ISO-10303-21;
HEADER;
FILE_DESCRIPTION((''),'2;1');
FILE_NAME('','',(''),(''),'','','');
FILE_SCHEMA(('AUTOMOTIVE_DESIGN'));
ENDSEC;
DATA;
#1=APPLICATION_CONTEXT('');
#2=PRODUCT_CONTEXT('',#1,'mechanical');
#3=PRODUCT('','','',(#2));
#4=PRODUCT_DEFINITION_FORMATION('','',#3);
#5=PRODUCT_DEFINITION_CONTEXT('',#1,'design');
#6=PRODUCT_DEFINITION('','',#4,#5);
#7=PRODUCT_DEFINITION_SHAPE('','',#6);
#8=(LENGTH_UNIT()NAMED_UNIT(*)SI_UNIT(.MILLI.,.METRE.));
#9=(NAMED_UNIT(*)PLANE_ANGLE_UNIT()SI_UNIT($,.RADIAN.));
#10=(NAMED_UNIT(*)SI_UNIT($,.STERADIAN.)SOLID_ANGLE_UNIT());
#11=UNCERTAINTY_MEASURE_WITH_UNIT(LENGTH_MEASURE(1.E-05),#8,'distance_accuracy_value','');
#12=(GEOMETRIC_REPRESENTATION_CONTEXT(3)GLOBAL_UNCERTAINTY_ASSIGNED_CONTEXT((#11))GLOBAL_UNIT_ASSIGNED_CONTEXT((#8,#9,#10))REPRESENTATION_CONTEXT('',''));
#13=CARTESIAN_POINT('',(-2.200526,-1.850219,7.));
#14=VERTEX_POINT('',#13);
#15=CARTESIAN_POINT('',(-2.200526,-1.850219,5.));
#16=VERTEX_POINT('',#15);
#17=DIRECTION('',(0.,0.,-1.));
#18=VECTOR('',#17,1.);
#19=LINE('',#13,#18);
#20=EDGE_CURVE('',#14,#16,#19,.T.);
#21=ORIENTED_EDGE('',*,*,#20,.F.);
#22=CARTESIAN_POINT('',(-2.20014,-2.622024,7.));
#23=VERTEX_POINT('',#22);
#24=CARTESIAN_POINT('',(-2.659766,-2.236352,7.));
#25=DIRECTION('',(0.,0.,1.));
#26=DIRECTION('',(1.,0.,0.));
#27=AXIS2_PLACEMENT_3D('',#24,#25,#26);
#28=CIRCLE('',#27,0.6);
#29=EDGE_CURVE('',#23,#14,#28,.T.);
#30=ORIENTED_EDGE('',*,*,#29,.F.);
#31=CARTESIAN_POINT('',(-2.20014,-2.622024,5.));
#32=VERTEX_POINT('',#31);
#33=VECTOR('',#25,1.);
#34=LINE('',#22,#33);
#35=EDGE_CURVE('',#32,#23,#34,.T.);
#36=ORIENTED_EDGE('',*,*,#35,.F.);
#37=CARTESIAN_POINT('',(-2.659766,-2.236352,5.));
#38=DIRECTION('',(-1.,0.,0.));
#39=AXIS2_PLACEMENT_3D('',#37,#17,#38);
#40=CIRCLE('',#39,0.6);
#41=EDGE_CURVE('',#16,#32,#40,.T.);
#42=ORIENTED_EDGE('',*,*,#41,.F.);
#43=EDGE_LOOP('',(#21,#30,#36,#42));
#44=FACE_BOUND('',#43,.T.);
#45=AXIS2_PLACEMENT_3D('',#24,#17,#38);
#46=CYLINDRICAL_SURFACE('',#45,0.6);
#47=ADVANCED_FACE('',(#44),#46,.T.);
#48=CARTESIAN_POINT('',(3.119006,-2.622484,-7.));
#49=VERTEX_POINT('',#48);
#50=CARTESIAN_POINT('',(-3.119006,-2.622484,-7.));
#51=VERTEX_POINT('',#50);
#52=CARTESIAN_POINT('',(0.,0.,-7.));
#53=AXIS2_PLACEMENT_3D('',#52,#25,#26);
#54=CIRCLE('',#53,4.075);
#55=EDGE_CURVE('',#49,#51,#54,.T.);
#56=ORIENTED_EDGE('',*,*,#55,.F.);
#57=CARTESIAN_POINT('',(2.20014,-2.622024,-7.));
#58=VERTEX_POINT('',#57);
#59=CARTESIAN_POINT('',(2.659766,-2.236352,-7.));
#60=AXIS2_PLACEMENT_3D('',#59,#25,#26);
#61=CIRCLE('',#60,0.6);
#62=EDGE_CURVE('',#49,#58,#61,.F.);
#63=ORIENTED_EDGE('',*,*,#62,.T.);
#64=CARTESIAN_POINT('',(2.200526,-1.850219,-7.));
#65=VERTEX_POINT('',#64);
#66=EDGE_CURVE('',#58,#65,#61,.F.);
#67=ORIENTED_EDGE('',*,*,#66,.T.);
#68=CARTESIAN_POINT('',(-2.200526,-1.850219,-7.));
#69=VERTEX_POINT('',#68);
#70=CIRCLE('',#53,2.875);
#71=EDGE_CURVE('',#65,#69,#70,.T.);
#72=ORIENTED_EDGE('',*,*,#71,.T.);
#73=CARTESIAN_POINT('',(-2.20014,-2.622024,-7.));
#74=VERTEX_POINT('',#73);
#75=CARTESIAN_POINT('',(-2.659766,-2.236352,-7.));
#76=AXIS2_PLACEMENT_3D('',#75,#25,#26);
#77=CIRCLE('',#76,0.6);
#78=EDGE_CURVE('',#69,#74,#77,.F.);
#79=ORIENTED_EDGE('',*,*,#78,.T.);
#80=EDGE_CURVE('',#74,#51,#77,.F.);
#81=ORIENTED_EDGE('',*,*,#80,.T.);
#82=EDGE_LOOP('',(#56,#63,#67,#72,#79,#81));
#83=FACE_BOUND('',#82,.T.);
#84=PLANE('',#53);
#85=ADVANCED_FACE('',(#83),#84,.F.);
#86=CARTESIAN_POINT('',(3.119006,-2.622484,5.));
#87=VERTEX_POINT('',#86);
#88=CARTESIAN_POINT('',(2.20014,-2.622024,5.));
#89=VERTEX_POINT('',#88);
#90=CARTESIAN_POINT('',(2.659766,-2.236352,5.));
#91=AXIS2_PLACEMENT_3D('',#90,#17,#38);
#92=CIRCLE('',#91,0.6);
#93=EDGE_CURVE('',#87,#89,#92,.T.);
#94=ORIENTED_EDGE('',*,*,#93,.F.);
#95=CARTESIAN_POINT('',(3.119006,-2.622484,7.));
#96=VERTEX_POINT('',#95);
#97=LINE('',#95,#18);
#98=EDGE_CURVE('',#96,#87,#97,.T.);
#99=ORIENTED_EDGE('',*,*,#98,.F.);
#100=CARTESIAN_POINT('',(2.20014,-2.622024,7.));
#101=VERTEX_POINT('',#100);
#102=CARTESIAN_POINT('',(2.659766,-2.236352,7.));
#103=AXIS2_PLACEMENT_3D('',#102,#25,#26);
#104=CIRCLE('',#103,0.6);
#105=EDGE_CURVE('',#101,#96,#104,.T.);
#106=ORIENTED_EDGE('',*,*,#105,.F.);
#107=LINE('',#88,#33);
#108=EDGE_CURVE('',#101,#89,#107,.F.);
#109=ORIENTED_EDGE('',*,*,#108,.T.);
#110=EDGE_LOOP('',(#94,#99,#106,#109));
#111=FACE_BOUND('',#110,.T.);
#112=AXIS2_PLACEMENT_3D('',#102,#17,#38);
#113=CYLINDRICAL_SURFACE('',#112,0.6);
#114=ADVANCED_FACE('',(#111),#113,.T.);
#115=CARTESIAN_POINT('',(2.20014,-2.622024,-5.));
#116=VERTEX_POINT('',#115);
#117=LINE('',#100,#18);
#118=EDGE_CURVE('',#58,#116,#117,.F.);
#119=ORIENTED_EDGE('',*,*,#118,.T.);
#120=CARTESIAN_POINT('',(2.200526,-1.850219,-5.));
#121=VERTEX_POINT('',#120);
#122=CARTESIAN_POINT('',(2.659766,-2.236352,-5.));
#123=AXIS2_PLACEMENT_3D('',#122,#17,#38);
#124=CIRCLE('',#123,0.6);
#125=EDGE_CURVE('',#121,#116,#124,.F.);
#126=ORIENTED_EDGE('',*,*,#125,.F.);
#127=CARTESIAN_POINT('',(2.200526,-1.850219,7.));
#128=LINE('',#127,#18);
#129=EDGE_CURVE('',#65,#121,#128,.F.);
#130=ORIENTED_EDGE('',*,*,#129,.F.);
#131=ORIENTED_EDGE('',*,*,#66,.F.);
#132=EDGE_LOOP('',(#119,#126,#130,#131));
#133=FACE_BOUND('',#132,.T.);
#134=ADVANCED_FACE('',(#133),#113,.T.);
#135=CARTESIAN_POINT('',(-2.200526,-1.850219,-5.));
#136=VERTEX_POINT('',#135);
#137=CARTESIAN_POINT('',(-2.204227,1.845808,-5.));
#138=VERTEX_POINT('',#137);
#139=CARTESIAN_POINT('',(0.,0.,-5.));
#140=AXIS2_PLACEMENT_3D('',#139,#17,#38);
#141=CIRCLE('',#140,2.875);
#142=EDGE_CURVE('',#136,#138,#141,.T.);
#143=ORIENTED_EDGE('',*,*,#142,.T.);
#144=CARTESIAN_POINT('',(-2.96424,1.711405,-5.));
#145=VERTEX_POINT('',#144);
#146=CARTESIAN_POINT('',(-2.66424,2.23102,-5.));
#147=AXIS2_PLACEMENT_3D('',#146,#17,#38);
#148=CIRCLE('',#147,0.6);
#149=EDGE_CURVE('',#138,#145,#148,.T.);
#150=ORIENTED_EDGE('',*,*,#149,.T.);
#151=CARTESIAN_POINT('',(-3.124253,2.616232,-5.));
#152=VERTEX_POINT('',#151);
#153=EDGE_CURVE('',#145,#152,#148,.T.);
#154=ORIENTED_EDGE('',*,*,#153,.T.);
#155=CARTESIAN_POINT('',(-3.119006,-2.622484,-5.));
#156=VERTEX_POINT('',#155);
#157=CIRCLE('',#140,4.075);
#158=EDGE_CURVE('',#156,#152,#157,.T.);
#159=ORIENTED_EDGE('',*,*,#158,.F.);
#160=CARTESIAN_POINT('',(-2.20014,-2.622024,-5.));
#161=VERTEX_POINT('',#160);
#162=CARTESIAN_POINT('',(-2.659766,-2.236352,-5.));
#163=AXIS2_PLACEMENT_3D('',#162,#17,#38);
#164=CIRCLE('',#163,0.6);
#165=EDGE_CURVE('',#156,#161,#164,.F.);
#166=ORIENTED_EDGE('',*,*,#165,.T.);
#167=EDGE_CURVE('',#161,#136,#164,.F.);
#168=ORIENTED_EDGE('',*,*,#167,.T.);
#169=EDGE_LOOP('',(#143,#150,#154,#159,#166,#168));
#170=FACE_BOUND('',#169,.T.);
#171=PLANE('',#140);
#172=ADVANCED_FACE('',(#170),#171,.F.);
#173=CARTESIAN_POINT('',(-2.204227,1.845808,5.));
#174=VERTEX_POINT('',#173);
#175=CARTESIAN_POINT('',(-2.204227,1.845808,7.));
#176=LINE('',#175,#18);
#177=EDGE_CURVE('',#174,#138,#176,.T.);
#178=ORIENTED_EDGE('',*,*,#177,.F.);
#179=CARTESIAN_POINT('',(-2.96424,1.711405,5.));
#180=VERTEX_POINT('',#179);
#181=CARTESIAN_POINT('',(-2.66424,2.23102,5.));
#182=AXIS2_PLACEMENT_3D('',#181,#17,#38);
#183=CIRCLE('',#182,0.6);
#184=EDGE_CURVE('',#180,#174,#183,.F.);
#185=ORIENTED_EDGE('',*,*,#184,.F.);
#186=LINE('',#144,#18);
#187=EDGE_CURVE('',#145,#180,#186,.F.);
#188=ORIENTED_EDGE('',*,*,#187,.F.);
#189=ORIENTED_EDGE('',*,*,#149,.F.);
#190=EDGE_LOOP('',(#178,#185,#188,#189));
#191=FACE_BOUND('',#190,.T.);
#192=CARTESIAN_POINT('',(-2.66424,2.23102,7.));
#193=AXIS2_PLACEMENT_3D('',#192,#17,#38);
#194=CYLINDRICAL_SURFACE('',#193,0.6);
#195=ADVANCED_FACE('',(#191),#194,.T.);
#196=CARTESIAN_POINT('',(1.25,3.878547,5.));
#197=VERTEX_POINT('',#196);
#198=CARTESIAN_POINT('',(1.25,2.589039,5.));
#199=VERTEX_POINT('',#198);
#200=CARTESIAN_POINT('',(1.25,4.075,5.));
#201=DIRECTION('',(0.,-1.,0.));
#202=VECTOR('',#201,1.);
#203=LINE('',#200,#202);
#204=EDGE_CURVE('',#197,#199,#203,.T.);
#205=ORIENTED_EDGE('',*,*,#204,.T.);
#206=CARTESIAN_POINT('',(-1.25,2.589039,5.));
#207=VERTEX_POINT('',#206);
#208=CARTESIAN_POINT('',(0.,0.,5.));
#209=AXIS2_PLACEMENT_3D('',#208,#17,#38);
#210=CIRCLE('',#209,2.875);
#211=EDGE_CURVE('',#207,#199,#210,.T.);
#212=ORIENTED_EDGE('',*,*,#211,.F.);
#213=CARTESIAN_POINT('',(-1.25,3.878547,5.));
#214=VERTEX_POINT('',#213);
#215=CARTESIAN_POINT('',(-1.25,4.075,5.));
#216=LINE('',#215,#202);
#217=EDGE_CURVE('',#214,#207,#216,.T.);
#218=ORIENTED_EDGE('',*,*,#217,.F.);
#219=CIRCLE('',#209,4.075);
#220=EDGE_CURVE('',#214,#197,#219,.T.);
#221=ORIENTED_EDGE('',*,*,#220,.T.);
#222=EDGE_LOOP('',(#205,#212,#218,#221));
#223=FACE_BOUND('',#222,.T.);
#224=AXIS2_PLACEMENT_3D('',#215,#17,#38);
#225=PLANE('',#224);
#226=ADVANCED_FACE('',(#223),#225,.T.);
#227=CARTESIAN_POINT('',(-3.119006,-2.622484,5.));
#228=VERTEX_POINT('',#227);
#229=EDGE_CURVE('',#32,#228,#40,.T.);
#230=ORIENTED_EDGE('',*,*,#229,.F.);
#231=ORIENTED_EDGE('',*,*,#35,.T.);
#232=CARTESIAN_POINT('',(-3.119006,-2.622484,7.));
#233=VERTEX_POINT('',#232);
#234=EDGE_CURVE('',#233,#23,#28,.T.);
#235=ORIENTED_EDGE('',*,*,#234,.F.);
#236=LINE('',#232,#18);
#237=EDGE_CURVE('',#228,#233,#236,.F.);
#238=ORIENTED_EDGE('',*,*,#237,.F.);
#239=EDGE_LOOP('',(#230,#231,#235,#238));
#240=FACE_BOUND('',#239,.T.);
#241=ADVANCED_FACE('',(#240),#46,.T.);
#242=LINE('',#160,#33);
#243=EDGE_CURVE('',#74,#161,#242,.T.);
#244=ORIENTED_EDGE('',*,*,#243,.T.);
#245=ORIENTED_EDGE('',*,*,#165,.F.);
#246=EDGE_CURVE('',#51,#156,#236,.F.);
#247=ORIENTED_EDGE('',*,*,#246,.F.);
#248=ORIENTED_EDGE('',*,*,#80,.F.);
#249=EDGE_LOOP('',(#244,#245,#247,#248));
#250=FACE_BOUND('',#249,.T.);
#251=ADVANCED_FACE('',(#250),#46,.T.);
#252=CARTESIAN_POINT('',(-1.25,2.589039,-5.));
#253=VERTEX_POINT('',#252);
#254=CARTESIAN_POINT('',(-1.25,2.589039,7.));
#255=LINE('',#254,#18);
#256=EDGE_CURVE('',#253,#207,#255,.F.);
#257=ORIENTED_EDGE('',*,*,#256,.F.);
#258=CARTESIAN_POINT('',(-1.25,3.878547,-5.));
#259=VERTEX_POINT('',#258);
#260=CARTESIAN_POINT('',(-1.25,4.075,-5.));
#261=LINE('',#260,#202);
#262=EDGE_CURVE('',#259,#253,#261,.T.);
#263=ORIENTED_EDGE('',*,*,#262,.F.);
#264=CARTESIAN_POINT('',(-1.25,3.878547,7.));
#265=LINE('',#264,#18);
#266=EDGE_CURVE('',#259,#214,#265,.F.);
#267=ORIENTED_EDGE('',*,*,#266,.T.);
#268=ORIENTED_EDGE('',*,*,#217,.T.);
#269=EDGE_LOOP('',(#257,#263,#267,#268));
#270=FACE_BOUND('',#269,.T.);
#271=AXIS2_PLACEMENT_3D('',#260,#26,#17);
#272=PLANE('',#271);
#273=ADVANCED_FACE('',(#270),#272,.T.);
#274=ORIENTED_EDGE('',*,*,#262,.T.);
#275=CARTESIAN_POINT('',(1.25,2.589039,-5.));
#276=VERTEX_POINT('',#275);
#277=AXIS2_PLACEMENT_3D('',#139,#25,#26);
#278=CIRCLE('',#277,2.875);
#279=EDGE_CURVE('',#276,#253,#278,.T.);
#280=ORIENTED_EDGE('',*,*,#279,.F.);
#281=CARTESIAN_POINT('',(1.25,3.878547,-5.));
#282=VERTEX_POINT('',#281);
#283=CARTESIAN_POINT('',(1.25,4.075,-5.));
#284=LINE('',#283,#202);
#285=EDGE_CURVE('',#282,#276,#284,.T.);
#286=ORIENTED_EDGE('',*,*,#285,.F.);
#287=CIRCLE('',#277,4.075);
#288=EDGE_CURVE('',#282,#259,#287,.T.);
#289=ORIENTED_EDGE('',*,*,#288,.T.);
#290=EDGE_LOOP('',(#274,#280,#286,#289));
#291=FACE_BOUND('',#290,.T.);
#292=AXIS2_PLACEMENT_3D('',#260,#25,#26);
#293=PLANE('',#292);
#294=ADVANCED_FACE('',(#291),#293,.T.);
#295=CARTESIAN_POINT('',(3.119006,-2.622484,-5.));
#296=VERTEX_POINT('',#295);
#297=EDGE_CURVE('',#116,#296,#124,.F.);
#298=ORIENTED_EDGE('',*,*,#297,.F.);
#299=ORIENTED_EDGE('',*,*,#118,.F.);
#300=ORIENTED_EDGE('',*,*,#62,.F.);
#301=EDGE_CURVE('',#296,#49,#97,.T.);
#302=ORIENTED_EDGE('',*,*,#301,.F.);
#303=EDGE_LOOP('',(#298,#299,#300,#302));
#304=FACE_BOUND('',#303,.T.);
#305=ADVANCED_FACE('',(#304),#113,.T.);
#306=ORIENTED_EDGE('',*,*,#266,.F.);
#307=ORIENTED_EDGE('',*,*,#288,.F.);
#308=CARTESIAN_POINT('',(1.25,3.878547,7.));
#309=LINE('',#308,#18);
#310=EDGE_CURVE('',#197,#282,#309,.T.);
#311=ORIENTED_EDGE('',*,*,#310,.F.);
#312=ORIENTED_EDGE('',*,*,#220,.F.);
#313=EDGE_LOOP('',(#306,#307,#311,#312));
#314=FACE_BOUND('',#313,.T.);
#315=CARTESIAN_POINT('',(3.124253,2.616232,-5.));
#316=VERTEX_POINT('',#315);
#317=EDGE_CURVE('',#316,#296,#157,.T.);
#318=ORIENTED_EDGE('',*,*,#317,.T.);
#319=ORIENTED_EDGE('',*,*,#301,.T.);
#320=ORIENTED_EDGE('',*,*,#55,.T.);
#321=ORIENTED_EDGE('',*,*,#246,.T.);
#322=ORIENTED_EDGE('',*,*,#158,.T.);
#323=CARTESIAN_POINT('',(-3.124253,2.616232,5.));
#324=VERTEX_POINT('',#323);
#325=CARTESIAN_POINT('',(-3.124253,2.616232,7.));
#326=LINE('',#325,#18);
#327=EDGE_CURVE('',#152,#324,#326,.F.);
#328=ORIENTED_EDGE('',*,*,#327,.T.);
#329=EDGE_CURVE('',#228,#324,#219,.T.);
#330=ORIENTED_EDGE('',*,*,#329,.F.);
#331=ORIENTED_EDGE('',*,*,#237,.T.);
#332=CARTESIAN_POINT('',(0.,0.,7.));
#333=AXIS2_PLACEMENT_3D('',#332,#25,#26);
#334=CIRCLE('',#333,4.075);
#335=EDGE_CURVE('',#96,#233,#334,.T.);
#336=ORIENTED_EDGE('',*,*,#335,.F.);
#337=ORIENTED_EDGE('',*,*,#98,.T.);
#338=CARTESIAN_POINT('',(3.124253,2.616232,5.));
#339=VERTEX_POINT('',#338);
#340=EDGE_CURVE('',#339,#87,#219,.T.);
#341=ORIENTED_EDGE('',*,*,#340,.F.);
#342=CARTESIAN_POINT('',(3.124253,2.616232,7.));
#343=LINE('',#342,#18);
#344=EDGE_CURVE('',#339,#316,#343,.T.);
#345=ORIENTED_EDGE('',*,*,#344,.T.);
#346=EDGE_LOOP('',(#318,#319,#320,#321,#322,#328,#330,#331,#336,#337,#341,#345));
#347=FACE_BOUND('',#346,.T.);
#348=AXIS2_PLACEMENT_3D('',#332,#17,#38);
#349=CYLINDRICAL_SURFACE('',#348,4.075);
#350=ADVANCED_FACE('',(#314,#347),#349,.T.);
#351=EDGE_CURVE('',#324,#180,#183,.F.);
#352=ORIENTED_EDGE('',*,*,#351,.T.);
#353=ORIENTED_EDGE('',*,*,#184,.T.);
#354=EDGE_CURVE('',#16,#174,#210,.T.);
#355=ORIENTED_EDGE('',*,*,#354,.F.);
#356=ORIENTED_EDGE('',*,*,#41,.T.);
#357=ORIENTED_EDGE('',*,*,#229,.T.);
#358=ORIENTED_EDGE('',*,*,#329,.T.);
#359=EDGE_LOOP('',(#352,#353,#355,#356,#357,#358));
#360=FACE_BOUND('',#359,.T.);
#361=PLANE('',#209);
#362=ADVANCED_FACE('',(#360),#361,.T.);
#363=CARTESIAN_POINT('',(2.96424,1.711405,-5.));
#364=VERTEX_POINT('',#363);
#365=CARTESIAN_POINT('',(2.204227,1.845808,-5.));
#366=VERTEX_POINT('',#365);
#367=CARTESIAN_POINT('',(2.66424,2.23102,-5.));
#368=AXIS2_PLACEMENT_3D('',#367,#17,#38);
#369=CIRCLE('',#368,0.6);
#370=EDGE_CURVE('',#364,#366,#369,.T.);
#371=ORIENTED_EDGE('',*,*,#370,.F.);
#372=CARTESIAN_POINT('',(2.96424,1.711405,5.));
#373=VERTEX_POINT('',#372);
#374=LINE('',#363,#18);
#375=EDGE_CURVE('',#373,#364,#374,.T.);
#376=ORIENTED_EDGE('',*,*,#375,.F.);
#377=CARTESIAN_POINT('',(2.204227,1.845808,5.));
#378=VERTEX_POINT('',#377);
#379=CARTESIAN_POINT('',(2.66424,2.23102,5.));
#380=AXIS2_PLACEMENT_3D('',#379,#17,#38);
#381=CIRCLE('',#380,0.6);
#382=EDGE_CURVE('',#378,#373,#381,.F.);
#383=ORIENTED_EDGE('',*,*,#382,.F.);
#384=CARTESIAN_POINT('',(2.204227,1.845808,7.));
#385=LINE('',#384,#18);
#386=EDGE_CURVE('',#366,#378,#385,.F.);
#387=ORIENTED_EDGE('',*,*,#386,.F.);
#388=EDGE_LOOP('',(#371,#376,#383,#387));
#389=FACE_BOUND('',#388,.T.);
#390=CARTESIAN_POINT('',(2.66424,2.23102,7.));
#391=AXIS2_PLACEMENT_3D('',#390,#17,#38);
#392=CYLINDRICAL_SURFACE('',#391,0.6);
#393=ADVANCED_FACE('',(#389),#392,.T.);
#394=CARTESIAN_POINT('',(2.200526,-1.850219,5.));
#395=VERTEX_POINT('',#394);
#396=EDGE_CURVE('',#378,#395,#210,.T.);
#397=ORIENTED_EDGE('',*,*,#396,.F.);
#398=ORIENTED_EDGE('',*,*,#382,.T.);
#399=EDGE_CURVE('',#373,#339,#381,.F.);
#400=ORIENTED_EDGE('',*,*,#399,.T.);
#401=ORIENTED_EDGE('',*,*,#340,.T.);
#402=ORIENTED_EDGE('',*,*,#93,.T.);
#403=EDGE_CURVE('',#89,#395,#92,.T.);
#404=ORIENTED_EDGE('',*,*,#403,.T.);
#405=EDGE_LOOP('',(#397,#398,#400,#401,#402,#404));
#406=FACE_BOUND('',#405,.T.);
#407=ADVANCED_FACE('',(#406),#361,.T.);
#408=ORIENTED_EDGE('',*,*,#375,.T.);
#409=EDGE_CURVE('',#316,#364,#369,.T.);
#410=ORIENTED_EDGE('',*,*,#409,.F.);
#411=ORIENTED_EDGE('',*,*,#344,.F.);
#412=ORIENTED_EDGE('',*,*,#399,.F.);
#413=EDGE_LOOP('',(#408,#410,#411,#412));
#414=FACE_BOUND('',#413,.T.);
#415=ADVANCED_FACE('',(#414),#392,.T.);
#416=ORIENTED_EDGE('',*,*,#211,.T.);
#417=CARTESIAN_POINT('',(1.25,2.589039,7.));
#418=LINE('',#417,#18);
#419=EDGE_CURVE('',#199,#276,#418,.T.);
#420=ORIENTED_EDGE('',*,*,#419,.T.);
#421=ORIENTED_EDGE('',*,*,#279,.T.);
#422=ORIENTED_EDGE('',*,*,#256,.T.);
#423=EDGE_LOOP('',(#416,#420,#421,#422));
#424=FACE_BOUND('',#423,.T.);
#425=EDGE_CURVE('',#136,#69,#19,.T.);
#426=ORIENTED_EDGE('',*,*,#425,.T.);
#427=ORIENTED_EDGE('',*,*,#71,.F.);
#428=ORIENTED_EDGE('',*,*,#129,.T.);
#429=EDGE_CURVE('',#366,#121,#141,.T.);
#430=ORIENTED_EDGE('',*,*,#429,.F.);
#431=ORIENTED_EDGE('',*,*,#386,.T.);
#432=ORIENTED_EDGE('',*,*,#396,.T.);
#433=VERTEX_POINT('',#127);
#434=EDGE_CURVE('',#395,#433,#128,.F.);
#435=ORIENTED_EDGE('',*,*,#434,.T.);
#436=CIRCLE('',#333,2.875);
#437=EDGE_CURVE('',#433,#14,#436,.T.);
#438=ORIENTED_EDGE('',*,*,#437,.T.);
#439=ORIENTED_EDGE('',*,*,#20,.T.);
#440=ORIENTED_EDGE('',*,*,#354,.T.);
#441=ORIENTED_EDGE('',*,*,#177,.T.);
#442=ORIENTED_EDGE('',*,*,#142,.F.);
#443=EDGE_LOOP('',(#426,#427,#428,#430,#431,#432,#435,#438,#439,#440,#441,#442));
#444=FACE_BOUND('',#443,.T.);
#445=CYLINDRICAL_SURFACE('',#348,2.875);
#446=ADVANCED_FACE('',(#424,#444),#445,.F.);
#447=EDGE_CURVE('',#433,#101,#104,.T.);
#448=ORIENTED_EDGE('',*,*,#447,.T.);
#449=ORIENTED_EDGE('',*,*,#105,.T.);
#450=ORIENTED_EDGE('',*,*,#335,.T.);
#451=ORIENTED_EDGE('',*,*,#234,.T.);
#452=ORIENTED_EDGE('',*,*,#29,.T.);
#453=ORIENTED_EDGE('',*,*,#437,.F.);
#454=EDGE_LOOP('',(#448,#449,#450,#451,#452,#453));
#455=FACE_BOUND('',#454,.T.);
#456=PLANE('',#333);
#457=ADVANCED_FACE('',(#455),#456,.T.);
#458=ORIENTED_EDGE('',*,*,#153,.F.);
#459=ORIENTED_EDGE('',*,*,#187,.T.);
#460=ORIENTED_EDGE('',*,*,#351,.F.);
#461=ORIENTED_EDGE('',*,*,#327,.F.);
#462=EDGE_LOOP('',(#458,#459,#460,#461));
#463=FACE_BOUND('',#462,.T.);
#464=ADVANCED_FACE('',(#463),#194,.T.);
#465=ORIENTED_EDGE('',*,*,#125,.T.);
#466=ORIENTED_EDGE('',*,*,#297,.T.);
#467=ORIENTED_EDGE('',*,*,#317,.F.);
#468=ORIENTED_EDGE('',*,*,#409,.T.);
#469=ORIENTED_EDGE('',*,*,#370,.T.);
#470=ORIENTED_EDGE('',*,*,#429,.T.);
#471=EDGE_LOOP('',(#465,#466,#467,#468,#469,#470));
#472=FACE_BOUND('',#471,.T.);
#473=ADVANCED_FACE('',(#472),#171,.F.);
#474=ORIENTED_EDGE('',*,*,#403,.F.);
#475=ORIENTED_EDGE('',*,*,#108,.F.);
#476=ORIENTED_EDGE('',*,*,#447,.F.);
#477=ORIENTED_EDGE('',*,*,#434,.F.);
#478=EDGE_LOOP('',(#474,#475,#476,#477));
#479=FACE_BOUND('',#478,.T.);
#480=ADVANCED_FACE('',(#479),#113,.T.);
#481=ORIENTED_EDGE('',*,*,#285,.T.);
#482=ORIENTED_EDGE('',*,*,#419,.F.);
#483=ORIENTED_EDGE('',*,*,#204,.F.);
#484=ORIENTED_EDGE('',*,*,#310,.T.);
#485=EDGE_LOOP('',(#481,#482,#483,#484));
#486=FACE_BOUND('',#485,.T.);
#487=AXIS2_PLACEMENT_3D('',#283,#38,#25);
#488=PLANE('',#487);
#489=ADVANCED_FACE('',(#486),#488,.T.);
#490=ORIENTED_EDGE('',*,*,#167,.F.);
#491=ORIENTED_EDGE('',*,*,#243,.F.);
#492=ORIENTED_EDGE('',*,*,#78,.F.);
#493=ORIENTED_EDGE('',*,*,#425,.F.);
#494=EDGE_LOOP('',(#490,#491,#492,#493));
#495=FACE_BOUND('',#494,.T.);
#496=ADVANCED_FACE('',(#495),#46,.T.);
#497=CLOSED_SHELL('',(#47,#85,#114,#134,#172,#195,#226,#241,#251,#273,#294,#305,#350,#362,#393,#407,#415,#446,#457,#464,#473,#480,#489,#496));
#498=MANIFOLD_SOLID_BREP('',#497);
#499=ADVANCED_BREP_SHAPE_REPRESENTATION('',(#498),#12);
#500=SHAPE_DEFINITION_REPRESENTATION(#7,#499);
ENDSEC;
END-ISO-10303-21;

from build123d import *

# Parameters (mm, degrees)
SKETCH1_R               = 4.075
SKETCH1_R_2             = 2.875
BOSS_EXTRUDE1_DEPTH     = 7
CUT_EXTRUDE2_DEPTH      = 5
CUT_EXTRUDE2_DEPTH_BACK = 5
CUT_EXTRUDE3_DEPTH      = 10.067041965
CUT_EXTRUDE3_DEPTH_BACK = 10.067041965
FILLET2_R               = 0.6
CUT_EXTRUDE4_DEPTH      = 10.067041965
CUT_EXTRUDE4_DEPTH_BACK = 10.067041965
SKETCH6_W               = 2.5
SKETCH6_H               = 10


with BuildPart() as part:
    # Sketch1 → Boss-Extrude1 (new, symmetric)
    with BuildSketch(Plane.XY):
        Circle(SKETCH1_R)
        Circle(SKETCH1_R_2, mode=Mode.SUBTRACT)
    extrude(amount=BOSS_EXTRUDE1_DEPTH, both=True)

    # Sketch4 → Cut-Extrude2 (cut, two sides: drawn at the far end of the back side and taken through both)
    with BuildSketch(Plane(origin=(0, 0, 0), x_dir=(-1, 0, 0), z_dir=(0, 0, -1)).offset(-CUT_EXTRUDE2_DEPTH_BACK)):
        with BuildLine():
            Line((-3.52905352, 2.0375), (0, 0))
            Line((0, 0), (3.52905352, 2.0375))
            ThreePointArc((3.52905352, 2.0375), (0, -4.075), (-3.52905352, 2.0375))
        make_face()
    extrude(amount=CUT_EXTRUDE2_DEPTH + CUT_EXTRUDE2_DEPTH_BACK, mode=Mode.SUBTRACT)

    # Sketch5 → Cut-Extrude3 (cut, two sides: drawn at the far end of the back side and taken through both)
    with BuildSketch(Plane(origin=(0, 0, 0), x_dir=(-1, 0, 0), z_dir=(0, 0, -1)).offset(-CUT_EXTRUDE3_DEPTH_BACK)):
        with BuildLine():
            Line((-2.619359509, -3.121631106), (0, 0))
            Line((0, 0), (2.619359509, -3.121631106))
            ThreePointArc((2.619359509, -3.121631106), (0, -4.075), (-2.619359509, -3.121631106))
        make_face()
    extrude(amount=CUT_EXTRUDE3_DEPTH + CUT_EXTRUDE3_DEPTH_BACK, mode=Mode.SUBTRACT)

    # Fillet2
    fillet2_edges = [part.edges().sort_by_distance(p)[0] for p in [
        (-3.52905352, 2.0375, 0),
        (-2.489823036, 1.4375, 0),
        (3.52905352, 2.0375, 0),
        (2.489823036, 1.4375, 0),
        (-2.619359509, -3.121631106, 6),
        (-1.848014378, -2.202377774, 6),
        (2.619359509, -3.121631106, 6),
        (1.848014378, -2.202377774, 6),
        (-2.619359509, -3.121631106, -6),
        (-1.848014378, -2.202377774, -6),
        (1.848014378, -2.202377774, -6),
        (2.619359509, -3.121631106, -6),
    ]]
    fillet(fillet2_edges, radius=FILLET2_R - 0.0001)  # a hair under: the kernel refuses the full size

    # Sketch6 → Cut-Extrude4 (cut, two sides: drawn at the far end of the back side and taken through both)
    with BuildSketch(Plane(origin=(0, 0, 0), x_dir=(1, 0, 0), z_dir=(0, 1, 0)).offset(-CUT_EXTRUDE4_DEPTH_BACK)):
        Rectangle(SKETCH6_W, SKETCH6_H)
    extrude(amount=CUT_EXTRUDE4_DEPTH + CUT_EXTRUDE4_DEPTH_BACK, mode=Mode.SUBTRACT)


solid = part.part
